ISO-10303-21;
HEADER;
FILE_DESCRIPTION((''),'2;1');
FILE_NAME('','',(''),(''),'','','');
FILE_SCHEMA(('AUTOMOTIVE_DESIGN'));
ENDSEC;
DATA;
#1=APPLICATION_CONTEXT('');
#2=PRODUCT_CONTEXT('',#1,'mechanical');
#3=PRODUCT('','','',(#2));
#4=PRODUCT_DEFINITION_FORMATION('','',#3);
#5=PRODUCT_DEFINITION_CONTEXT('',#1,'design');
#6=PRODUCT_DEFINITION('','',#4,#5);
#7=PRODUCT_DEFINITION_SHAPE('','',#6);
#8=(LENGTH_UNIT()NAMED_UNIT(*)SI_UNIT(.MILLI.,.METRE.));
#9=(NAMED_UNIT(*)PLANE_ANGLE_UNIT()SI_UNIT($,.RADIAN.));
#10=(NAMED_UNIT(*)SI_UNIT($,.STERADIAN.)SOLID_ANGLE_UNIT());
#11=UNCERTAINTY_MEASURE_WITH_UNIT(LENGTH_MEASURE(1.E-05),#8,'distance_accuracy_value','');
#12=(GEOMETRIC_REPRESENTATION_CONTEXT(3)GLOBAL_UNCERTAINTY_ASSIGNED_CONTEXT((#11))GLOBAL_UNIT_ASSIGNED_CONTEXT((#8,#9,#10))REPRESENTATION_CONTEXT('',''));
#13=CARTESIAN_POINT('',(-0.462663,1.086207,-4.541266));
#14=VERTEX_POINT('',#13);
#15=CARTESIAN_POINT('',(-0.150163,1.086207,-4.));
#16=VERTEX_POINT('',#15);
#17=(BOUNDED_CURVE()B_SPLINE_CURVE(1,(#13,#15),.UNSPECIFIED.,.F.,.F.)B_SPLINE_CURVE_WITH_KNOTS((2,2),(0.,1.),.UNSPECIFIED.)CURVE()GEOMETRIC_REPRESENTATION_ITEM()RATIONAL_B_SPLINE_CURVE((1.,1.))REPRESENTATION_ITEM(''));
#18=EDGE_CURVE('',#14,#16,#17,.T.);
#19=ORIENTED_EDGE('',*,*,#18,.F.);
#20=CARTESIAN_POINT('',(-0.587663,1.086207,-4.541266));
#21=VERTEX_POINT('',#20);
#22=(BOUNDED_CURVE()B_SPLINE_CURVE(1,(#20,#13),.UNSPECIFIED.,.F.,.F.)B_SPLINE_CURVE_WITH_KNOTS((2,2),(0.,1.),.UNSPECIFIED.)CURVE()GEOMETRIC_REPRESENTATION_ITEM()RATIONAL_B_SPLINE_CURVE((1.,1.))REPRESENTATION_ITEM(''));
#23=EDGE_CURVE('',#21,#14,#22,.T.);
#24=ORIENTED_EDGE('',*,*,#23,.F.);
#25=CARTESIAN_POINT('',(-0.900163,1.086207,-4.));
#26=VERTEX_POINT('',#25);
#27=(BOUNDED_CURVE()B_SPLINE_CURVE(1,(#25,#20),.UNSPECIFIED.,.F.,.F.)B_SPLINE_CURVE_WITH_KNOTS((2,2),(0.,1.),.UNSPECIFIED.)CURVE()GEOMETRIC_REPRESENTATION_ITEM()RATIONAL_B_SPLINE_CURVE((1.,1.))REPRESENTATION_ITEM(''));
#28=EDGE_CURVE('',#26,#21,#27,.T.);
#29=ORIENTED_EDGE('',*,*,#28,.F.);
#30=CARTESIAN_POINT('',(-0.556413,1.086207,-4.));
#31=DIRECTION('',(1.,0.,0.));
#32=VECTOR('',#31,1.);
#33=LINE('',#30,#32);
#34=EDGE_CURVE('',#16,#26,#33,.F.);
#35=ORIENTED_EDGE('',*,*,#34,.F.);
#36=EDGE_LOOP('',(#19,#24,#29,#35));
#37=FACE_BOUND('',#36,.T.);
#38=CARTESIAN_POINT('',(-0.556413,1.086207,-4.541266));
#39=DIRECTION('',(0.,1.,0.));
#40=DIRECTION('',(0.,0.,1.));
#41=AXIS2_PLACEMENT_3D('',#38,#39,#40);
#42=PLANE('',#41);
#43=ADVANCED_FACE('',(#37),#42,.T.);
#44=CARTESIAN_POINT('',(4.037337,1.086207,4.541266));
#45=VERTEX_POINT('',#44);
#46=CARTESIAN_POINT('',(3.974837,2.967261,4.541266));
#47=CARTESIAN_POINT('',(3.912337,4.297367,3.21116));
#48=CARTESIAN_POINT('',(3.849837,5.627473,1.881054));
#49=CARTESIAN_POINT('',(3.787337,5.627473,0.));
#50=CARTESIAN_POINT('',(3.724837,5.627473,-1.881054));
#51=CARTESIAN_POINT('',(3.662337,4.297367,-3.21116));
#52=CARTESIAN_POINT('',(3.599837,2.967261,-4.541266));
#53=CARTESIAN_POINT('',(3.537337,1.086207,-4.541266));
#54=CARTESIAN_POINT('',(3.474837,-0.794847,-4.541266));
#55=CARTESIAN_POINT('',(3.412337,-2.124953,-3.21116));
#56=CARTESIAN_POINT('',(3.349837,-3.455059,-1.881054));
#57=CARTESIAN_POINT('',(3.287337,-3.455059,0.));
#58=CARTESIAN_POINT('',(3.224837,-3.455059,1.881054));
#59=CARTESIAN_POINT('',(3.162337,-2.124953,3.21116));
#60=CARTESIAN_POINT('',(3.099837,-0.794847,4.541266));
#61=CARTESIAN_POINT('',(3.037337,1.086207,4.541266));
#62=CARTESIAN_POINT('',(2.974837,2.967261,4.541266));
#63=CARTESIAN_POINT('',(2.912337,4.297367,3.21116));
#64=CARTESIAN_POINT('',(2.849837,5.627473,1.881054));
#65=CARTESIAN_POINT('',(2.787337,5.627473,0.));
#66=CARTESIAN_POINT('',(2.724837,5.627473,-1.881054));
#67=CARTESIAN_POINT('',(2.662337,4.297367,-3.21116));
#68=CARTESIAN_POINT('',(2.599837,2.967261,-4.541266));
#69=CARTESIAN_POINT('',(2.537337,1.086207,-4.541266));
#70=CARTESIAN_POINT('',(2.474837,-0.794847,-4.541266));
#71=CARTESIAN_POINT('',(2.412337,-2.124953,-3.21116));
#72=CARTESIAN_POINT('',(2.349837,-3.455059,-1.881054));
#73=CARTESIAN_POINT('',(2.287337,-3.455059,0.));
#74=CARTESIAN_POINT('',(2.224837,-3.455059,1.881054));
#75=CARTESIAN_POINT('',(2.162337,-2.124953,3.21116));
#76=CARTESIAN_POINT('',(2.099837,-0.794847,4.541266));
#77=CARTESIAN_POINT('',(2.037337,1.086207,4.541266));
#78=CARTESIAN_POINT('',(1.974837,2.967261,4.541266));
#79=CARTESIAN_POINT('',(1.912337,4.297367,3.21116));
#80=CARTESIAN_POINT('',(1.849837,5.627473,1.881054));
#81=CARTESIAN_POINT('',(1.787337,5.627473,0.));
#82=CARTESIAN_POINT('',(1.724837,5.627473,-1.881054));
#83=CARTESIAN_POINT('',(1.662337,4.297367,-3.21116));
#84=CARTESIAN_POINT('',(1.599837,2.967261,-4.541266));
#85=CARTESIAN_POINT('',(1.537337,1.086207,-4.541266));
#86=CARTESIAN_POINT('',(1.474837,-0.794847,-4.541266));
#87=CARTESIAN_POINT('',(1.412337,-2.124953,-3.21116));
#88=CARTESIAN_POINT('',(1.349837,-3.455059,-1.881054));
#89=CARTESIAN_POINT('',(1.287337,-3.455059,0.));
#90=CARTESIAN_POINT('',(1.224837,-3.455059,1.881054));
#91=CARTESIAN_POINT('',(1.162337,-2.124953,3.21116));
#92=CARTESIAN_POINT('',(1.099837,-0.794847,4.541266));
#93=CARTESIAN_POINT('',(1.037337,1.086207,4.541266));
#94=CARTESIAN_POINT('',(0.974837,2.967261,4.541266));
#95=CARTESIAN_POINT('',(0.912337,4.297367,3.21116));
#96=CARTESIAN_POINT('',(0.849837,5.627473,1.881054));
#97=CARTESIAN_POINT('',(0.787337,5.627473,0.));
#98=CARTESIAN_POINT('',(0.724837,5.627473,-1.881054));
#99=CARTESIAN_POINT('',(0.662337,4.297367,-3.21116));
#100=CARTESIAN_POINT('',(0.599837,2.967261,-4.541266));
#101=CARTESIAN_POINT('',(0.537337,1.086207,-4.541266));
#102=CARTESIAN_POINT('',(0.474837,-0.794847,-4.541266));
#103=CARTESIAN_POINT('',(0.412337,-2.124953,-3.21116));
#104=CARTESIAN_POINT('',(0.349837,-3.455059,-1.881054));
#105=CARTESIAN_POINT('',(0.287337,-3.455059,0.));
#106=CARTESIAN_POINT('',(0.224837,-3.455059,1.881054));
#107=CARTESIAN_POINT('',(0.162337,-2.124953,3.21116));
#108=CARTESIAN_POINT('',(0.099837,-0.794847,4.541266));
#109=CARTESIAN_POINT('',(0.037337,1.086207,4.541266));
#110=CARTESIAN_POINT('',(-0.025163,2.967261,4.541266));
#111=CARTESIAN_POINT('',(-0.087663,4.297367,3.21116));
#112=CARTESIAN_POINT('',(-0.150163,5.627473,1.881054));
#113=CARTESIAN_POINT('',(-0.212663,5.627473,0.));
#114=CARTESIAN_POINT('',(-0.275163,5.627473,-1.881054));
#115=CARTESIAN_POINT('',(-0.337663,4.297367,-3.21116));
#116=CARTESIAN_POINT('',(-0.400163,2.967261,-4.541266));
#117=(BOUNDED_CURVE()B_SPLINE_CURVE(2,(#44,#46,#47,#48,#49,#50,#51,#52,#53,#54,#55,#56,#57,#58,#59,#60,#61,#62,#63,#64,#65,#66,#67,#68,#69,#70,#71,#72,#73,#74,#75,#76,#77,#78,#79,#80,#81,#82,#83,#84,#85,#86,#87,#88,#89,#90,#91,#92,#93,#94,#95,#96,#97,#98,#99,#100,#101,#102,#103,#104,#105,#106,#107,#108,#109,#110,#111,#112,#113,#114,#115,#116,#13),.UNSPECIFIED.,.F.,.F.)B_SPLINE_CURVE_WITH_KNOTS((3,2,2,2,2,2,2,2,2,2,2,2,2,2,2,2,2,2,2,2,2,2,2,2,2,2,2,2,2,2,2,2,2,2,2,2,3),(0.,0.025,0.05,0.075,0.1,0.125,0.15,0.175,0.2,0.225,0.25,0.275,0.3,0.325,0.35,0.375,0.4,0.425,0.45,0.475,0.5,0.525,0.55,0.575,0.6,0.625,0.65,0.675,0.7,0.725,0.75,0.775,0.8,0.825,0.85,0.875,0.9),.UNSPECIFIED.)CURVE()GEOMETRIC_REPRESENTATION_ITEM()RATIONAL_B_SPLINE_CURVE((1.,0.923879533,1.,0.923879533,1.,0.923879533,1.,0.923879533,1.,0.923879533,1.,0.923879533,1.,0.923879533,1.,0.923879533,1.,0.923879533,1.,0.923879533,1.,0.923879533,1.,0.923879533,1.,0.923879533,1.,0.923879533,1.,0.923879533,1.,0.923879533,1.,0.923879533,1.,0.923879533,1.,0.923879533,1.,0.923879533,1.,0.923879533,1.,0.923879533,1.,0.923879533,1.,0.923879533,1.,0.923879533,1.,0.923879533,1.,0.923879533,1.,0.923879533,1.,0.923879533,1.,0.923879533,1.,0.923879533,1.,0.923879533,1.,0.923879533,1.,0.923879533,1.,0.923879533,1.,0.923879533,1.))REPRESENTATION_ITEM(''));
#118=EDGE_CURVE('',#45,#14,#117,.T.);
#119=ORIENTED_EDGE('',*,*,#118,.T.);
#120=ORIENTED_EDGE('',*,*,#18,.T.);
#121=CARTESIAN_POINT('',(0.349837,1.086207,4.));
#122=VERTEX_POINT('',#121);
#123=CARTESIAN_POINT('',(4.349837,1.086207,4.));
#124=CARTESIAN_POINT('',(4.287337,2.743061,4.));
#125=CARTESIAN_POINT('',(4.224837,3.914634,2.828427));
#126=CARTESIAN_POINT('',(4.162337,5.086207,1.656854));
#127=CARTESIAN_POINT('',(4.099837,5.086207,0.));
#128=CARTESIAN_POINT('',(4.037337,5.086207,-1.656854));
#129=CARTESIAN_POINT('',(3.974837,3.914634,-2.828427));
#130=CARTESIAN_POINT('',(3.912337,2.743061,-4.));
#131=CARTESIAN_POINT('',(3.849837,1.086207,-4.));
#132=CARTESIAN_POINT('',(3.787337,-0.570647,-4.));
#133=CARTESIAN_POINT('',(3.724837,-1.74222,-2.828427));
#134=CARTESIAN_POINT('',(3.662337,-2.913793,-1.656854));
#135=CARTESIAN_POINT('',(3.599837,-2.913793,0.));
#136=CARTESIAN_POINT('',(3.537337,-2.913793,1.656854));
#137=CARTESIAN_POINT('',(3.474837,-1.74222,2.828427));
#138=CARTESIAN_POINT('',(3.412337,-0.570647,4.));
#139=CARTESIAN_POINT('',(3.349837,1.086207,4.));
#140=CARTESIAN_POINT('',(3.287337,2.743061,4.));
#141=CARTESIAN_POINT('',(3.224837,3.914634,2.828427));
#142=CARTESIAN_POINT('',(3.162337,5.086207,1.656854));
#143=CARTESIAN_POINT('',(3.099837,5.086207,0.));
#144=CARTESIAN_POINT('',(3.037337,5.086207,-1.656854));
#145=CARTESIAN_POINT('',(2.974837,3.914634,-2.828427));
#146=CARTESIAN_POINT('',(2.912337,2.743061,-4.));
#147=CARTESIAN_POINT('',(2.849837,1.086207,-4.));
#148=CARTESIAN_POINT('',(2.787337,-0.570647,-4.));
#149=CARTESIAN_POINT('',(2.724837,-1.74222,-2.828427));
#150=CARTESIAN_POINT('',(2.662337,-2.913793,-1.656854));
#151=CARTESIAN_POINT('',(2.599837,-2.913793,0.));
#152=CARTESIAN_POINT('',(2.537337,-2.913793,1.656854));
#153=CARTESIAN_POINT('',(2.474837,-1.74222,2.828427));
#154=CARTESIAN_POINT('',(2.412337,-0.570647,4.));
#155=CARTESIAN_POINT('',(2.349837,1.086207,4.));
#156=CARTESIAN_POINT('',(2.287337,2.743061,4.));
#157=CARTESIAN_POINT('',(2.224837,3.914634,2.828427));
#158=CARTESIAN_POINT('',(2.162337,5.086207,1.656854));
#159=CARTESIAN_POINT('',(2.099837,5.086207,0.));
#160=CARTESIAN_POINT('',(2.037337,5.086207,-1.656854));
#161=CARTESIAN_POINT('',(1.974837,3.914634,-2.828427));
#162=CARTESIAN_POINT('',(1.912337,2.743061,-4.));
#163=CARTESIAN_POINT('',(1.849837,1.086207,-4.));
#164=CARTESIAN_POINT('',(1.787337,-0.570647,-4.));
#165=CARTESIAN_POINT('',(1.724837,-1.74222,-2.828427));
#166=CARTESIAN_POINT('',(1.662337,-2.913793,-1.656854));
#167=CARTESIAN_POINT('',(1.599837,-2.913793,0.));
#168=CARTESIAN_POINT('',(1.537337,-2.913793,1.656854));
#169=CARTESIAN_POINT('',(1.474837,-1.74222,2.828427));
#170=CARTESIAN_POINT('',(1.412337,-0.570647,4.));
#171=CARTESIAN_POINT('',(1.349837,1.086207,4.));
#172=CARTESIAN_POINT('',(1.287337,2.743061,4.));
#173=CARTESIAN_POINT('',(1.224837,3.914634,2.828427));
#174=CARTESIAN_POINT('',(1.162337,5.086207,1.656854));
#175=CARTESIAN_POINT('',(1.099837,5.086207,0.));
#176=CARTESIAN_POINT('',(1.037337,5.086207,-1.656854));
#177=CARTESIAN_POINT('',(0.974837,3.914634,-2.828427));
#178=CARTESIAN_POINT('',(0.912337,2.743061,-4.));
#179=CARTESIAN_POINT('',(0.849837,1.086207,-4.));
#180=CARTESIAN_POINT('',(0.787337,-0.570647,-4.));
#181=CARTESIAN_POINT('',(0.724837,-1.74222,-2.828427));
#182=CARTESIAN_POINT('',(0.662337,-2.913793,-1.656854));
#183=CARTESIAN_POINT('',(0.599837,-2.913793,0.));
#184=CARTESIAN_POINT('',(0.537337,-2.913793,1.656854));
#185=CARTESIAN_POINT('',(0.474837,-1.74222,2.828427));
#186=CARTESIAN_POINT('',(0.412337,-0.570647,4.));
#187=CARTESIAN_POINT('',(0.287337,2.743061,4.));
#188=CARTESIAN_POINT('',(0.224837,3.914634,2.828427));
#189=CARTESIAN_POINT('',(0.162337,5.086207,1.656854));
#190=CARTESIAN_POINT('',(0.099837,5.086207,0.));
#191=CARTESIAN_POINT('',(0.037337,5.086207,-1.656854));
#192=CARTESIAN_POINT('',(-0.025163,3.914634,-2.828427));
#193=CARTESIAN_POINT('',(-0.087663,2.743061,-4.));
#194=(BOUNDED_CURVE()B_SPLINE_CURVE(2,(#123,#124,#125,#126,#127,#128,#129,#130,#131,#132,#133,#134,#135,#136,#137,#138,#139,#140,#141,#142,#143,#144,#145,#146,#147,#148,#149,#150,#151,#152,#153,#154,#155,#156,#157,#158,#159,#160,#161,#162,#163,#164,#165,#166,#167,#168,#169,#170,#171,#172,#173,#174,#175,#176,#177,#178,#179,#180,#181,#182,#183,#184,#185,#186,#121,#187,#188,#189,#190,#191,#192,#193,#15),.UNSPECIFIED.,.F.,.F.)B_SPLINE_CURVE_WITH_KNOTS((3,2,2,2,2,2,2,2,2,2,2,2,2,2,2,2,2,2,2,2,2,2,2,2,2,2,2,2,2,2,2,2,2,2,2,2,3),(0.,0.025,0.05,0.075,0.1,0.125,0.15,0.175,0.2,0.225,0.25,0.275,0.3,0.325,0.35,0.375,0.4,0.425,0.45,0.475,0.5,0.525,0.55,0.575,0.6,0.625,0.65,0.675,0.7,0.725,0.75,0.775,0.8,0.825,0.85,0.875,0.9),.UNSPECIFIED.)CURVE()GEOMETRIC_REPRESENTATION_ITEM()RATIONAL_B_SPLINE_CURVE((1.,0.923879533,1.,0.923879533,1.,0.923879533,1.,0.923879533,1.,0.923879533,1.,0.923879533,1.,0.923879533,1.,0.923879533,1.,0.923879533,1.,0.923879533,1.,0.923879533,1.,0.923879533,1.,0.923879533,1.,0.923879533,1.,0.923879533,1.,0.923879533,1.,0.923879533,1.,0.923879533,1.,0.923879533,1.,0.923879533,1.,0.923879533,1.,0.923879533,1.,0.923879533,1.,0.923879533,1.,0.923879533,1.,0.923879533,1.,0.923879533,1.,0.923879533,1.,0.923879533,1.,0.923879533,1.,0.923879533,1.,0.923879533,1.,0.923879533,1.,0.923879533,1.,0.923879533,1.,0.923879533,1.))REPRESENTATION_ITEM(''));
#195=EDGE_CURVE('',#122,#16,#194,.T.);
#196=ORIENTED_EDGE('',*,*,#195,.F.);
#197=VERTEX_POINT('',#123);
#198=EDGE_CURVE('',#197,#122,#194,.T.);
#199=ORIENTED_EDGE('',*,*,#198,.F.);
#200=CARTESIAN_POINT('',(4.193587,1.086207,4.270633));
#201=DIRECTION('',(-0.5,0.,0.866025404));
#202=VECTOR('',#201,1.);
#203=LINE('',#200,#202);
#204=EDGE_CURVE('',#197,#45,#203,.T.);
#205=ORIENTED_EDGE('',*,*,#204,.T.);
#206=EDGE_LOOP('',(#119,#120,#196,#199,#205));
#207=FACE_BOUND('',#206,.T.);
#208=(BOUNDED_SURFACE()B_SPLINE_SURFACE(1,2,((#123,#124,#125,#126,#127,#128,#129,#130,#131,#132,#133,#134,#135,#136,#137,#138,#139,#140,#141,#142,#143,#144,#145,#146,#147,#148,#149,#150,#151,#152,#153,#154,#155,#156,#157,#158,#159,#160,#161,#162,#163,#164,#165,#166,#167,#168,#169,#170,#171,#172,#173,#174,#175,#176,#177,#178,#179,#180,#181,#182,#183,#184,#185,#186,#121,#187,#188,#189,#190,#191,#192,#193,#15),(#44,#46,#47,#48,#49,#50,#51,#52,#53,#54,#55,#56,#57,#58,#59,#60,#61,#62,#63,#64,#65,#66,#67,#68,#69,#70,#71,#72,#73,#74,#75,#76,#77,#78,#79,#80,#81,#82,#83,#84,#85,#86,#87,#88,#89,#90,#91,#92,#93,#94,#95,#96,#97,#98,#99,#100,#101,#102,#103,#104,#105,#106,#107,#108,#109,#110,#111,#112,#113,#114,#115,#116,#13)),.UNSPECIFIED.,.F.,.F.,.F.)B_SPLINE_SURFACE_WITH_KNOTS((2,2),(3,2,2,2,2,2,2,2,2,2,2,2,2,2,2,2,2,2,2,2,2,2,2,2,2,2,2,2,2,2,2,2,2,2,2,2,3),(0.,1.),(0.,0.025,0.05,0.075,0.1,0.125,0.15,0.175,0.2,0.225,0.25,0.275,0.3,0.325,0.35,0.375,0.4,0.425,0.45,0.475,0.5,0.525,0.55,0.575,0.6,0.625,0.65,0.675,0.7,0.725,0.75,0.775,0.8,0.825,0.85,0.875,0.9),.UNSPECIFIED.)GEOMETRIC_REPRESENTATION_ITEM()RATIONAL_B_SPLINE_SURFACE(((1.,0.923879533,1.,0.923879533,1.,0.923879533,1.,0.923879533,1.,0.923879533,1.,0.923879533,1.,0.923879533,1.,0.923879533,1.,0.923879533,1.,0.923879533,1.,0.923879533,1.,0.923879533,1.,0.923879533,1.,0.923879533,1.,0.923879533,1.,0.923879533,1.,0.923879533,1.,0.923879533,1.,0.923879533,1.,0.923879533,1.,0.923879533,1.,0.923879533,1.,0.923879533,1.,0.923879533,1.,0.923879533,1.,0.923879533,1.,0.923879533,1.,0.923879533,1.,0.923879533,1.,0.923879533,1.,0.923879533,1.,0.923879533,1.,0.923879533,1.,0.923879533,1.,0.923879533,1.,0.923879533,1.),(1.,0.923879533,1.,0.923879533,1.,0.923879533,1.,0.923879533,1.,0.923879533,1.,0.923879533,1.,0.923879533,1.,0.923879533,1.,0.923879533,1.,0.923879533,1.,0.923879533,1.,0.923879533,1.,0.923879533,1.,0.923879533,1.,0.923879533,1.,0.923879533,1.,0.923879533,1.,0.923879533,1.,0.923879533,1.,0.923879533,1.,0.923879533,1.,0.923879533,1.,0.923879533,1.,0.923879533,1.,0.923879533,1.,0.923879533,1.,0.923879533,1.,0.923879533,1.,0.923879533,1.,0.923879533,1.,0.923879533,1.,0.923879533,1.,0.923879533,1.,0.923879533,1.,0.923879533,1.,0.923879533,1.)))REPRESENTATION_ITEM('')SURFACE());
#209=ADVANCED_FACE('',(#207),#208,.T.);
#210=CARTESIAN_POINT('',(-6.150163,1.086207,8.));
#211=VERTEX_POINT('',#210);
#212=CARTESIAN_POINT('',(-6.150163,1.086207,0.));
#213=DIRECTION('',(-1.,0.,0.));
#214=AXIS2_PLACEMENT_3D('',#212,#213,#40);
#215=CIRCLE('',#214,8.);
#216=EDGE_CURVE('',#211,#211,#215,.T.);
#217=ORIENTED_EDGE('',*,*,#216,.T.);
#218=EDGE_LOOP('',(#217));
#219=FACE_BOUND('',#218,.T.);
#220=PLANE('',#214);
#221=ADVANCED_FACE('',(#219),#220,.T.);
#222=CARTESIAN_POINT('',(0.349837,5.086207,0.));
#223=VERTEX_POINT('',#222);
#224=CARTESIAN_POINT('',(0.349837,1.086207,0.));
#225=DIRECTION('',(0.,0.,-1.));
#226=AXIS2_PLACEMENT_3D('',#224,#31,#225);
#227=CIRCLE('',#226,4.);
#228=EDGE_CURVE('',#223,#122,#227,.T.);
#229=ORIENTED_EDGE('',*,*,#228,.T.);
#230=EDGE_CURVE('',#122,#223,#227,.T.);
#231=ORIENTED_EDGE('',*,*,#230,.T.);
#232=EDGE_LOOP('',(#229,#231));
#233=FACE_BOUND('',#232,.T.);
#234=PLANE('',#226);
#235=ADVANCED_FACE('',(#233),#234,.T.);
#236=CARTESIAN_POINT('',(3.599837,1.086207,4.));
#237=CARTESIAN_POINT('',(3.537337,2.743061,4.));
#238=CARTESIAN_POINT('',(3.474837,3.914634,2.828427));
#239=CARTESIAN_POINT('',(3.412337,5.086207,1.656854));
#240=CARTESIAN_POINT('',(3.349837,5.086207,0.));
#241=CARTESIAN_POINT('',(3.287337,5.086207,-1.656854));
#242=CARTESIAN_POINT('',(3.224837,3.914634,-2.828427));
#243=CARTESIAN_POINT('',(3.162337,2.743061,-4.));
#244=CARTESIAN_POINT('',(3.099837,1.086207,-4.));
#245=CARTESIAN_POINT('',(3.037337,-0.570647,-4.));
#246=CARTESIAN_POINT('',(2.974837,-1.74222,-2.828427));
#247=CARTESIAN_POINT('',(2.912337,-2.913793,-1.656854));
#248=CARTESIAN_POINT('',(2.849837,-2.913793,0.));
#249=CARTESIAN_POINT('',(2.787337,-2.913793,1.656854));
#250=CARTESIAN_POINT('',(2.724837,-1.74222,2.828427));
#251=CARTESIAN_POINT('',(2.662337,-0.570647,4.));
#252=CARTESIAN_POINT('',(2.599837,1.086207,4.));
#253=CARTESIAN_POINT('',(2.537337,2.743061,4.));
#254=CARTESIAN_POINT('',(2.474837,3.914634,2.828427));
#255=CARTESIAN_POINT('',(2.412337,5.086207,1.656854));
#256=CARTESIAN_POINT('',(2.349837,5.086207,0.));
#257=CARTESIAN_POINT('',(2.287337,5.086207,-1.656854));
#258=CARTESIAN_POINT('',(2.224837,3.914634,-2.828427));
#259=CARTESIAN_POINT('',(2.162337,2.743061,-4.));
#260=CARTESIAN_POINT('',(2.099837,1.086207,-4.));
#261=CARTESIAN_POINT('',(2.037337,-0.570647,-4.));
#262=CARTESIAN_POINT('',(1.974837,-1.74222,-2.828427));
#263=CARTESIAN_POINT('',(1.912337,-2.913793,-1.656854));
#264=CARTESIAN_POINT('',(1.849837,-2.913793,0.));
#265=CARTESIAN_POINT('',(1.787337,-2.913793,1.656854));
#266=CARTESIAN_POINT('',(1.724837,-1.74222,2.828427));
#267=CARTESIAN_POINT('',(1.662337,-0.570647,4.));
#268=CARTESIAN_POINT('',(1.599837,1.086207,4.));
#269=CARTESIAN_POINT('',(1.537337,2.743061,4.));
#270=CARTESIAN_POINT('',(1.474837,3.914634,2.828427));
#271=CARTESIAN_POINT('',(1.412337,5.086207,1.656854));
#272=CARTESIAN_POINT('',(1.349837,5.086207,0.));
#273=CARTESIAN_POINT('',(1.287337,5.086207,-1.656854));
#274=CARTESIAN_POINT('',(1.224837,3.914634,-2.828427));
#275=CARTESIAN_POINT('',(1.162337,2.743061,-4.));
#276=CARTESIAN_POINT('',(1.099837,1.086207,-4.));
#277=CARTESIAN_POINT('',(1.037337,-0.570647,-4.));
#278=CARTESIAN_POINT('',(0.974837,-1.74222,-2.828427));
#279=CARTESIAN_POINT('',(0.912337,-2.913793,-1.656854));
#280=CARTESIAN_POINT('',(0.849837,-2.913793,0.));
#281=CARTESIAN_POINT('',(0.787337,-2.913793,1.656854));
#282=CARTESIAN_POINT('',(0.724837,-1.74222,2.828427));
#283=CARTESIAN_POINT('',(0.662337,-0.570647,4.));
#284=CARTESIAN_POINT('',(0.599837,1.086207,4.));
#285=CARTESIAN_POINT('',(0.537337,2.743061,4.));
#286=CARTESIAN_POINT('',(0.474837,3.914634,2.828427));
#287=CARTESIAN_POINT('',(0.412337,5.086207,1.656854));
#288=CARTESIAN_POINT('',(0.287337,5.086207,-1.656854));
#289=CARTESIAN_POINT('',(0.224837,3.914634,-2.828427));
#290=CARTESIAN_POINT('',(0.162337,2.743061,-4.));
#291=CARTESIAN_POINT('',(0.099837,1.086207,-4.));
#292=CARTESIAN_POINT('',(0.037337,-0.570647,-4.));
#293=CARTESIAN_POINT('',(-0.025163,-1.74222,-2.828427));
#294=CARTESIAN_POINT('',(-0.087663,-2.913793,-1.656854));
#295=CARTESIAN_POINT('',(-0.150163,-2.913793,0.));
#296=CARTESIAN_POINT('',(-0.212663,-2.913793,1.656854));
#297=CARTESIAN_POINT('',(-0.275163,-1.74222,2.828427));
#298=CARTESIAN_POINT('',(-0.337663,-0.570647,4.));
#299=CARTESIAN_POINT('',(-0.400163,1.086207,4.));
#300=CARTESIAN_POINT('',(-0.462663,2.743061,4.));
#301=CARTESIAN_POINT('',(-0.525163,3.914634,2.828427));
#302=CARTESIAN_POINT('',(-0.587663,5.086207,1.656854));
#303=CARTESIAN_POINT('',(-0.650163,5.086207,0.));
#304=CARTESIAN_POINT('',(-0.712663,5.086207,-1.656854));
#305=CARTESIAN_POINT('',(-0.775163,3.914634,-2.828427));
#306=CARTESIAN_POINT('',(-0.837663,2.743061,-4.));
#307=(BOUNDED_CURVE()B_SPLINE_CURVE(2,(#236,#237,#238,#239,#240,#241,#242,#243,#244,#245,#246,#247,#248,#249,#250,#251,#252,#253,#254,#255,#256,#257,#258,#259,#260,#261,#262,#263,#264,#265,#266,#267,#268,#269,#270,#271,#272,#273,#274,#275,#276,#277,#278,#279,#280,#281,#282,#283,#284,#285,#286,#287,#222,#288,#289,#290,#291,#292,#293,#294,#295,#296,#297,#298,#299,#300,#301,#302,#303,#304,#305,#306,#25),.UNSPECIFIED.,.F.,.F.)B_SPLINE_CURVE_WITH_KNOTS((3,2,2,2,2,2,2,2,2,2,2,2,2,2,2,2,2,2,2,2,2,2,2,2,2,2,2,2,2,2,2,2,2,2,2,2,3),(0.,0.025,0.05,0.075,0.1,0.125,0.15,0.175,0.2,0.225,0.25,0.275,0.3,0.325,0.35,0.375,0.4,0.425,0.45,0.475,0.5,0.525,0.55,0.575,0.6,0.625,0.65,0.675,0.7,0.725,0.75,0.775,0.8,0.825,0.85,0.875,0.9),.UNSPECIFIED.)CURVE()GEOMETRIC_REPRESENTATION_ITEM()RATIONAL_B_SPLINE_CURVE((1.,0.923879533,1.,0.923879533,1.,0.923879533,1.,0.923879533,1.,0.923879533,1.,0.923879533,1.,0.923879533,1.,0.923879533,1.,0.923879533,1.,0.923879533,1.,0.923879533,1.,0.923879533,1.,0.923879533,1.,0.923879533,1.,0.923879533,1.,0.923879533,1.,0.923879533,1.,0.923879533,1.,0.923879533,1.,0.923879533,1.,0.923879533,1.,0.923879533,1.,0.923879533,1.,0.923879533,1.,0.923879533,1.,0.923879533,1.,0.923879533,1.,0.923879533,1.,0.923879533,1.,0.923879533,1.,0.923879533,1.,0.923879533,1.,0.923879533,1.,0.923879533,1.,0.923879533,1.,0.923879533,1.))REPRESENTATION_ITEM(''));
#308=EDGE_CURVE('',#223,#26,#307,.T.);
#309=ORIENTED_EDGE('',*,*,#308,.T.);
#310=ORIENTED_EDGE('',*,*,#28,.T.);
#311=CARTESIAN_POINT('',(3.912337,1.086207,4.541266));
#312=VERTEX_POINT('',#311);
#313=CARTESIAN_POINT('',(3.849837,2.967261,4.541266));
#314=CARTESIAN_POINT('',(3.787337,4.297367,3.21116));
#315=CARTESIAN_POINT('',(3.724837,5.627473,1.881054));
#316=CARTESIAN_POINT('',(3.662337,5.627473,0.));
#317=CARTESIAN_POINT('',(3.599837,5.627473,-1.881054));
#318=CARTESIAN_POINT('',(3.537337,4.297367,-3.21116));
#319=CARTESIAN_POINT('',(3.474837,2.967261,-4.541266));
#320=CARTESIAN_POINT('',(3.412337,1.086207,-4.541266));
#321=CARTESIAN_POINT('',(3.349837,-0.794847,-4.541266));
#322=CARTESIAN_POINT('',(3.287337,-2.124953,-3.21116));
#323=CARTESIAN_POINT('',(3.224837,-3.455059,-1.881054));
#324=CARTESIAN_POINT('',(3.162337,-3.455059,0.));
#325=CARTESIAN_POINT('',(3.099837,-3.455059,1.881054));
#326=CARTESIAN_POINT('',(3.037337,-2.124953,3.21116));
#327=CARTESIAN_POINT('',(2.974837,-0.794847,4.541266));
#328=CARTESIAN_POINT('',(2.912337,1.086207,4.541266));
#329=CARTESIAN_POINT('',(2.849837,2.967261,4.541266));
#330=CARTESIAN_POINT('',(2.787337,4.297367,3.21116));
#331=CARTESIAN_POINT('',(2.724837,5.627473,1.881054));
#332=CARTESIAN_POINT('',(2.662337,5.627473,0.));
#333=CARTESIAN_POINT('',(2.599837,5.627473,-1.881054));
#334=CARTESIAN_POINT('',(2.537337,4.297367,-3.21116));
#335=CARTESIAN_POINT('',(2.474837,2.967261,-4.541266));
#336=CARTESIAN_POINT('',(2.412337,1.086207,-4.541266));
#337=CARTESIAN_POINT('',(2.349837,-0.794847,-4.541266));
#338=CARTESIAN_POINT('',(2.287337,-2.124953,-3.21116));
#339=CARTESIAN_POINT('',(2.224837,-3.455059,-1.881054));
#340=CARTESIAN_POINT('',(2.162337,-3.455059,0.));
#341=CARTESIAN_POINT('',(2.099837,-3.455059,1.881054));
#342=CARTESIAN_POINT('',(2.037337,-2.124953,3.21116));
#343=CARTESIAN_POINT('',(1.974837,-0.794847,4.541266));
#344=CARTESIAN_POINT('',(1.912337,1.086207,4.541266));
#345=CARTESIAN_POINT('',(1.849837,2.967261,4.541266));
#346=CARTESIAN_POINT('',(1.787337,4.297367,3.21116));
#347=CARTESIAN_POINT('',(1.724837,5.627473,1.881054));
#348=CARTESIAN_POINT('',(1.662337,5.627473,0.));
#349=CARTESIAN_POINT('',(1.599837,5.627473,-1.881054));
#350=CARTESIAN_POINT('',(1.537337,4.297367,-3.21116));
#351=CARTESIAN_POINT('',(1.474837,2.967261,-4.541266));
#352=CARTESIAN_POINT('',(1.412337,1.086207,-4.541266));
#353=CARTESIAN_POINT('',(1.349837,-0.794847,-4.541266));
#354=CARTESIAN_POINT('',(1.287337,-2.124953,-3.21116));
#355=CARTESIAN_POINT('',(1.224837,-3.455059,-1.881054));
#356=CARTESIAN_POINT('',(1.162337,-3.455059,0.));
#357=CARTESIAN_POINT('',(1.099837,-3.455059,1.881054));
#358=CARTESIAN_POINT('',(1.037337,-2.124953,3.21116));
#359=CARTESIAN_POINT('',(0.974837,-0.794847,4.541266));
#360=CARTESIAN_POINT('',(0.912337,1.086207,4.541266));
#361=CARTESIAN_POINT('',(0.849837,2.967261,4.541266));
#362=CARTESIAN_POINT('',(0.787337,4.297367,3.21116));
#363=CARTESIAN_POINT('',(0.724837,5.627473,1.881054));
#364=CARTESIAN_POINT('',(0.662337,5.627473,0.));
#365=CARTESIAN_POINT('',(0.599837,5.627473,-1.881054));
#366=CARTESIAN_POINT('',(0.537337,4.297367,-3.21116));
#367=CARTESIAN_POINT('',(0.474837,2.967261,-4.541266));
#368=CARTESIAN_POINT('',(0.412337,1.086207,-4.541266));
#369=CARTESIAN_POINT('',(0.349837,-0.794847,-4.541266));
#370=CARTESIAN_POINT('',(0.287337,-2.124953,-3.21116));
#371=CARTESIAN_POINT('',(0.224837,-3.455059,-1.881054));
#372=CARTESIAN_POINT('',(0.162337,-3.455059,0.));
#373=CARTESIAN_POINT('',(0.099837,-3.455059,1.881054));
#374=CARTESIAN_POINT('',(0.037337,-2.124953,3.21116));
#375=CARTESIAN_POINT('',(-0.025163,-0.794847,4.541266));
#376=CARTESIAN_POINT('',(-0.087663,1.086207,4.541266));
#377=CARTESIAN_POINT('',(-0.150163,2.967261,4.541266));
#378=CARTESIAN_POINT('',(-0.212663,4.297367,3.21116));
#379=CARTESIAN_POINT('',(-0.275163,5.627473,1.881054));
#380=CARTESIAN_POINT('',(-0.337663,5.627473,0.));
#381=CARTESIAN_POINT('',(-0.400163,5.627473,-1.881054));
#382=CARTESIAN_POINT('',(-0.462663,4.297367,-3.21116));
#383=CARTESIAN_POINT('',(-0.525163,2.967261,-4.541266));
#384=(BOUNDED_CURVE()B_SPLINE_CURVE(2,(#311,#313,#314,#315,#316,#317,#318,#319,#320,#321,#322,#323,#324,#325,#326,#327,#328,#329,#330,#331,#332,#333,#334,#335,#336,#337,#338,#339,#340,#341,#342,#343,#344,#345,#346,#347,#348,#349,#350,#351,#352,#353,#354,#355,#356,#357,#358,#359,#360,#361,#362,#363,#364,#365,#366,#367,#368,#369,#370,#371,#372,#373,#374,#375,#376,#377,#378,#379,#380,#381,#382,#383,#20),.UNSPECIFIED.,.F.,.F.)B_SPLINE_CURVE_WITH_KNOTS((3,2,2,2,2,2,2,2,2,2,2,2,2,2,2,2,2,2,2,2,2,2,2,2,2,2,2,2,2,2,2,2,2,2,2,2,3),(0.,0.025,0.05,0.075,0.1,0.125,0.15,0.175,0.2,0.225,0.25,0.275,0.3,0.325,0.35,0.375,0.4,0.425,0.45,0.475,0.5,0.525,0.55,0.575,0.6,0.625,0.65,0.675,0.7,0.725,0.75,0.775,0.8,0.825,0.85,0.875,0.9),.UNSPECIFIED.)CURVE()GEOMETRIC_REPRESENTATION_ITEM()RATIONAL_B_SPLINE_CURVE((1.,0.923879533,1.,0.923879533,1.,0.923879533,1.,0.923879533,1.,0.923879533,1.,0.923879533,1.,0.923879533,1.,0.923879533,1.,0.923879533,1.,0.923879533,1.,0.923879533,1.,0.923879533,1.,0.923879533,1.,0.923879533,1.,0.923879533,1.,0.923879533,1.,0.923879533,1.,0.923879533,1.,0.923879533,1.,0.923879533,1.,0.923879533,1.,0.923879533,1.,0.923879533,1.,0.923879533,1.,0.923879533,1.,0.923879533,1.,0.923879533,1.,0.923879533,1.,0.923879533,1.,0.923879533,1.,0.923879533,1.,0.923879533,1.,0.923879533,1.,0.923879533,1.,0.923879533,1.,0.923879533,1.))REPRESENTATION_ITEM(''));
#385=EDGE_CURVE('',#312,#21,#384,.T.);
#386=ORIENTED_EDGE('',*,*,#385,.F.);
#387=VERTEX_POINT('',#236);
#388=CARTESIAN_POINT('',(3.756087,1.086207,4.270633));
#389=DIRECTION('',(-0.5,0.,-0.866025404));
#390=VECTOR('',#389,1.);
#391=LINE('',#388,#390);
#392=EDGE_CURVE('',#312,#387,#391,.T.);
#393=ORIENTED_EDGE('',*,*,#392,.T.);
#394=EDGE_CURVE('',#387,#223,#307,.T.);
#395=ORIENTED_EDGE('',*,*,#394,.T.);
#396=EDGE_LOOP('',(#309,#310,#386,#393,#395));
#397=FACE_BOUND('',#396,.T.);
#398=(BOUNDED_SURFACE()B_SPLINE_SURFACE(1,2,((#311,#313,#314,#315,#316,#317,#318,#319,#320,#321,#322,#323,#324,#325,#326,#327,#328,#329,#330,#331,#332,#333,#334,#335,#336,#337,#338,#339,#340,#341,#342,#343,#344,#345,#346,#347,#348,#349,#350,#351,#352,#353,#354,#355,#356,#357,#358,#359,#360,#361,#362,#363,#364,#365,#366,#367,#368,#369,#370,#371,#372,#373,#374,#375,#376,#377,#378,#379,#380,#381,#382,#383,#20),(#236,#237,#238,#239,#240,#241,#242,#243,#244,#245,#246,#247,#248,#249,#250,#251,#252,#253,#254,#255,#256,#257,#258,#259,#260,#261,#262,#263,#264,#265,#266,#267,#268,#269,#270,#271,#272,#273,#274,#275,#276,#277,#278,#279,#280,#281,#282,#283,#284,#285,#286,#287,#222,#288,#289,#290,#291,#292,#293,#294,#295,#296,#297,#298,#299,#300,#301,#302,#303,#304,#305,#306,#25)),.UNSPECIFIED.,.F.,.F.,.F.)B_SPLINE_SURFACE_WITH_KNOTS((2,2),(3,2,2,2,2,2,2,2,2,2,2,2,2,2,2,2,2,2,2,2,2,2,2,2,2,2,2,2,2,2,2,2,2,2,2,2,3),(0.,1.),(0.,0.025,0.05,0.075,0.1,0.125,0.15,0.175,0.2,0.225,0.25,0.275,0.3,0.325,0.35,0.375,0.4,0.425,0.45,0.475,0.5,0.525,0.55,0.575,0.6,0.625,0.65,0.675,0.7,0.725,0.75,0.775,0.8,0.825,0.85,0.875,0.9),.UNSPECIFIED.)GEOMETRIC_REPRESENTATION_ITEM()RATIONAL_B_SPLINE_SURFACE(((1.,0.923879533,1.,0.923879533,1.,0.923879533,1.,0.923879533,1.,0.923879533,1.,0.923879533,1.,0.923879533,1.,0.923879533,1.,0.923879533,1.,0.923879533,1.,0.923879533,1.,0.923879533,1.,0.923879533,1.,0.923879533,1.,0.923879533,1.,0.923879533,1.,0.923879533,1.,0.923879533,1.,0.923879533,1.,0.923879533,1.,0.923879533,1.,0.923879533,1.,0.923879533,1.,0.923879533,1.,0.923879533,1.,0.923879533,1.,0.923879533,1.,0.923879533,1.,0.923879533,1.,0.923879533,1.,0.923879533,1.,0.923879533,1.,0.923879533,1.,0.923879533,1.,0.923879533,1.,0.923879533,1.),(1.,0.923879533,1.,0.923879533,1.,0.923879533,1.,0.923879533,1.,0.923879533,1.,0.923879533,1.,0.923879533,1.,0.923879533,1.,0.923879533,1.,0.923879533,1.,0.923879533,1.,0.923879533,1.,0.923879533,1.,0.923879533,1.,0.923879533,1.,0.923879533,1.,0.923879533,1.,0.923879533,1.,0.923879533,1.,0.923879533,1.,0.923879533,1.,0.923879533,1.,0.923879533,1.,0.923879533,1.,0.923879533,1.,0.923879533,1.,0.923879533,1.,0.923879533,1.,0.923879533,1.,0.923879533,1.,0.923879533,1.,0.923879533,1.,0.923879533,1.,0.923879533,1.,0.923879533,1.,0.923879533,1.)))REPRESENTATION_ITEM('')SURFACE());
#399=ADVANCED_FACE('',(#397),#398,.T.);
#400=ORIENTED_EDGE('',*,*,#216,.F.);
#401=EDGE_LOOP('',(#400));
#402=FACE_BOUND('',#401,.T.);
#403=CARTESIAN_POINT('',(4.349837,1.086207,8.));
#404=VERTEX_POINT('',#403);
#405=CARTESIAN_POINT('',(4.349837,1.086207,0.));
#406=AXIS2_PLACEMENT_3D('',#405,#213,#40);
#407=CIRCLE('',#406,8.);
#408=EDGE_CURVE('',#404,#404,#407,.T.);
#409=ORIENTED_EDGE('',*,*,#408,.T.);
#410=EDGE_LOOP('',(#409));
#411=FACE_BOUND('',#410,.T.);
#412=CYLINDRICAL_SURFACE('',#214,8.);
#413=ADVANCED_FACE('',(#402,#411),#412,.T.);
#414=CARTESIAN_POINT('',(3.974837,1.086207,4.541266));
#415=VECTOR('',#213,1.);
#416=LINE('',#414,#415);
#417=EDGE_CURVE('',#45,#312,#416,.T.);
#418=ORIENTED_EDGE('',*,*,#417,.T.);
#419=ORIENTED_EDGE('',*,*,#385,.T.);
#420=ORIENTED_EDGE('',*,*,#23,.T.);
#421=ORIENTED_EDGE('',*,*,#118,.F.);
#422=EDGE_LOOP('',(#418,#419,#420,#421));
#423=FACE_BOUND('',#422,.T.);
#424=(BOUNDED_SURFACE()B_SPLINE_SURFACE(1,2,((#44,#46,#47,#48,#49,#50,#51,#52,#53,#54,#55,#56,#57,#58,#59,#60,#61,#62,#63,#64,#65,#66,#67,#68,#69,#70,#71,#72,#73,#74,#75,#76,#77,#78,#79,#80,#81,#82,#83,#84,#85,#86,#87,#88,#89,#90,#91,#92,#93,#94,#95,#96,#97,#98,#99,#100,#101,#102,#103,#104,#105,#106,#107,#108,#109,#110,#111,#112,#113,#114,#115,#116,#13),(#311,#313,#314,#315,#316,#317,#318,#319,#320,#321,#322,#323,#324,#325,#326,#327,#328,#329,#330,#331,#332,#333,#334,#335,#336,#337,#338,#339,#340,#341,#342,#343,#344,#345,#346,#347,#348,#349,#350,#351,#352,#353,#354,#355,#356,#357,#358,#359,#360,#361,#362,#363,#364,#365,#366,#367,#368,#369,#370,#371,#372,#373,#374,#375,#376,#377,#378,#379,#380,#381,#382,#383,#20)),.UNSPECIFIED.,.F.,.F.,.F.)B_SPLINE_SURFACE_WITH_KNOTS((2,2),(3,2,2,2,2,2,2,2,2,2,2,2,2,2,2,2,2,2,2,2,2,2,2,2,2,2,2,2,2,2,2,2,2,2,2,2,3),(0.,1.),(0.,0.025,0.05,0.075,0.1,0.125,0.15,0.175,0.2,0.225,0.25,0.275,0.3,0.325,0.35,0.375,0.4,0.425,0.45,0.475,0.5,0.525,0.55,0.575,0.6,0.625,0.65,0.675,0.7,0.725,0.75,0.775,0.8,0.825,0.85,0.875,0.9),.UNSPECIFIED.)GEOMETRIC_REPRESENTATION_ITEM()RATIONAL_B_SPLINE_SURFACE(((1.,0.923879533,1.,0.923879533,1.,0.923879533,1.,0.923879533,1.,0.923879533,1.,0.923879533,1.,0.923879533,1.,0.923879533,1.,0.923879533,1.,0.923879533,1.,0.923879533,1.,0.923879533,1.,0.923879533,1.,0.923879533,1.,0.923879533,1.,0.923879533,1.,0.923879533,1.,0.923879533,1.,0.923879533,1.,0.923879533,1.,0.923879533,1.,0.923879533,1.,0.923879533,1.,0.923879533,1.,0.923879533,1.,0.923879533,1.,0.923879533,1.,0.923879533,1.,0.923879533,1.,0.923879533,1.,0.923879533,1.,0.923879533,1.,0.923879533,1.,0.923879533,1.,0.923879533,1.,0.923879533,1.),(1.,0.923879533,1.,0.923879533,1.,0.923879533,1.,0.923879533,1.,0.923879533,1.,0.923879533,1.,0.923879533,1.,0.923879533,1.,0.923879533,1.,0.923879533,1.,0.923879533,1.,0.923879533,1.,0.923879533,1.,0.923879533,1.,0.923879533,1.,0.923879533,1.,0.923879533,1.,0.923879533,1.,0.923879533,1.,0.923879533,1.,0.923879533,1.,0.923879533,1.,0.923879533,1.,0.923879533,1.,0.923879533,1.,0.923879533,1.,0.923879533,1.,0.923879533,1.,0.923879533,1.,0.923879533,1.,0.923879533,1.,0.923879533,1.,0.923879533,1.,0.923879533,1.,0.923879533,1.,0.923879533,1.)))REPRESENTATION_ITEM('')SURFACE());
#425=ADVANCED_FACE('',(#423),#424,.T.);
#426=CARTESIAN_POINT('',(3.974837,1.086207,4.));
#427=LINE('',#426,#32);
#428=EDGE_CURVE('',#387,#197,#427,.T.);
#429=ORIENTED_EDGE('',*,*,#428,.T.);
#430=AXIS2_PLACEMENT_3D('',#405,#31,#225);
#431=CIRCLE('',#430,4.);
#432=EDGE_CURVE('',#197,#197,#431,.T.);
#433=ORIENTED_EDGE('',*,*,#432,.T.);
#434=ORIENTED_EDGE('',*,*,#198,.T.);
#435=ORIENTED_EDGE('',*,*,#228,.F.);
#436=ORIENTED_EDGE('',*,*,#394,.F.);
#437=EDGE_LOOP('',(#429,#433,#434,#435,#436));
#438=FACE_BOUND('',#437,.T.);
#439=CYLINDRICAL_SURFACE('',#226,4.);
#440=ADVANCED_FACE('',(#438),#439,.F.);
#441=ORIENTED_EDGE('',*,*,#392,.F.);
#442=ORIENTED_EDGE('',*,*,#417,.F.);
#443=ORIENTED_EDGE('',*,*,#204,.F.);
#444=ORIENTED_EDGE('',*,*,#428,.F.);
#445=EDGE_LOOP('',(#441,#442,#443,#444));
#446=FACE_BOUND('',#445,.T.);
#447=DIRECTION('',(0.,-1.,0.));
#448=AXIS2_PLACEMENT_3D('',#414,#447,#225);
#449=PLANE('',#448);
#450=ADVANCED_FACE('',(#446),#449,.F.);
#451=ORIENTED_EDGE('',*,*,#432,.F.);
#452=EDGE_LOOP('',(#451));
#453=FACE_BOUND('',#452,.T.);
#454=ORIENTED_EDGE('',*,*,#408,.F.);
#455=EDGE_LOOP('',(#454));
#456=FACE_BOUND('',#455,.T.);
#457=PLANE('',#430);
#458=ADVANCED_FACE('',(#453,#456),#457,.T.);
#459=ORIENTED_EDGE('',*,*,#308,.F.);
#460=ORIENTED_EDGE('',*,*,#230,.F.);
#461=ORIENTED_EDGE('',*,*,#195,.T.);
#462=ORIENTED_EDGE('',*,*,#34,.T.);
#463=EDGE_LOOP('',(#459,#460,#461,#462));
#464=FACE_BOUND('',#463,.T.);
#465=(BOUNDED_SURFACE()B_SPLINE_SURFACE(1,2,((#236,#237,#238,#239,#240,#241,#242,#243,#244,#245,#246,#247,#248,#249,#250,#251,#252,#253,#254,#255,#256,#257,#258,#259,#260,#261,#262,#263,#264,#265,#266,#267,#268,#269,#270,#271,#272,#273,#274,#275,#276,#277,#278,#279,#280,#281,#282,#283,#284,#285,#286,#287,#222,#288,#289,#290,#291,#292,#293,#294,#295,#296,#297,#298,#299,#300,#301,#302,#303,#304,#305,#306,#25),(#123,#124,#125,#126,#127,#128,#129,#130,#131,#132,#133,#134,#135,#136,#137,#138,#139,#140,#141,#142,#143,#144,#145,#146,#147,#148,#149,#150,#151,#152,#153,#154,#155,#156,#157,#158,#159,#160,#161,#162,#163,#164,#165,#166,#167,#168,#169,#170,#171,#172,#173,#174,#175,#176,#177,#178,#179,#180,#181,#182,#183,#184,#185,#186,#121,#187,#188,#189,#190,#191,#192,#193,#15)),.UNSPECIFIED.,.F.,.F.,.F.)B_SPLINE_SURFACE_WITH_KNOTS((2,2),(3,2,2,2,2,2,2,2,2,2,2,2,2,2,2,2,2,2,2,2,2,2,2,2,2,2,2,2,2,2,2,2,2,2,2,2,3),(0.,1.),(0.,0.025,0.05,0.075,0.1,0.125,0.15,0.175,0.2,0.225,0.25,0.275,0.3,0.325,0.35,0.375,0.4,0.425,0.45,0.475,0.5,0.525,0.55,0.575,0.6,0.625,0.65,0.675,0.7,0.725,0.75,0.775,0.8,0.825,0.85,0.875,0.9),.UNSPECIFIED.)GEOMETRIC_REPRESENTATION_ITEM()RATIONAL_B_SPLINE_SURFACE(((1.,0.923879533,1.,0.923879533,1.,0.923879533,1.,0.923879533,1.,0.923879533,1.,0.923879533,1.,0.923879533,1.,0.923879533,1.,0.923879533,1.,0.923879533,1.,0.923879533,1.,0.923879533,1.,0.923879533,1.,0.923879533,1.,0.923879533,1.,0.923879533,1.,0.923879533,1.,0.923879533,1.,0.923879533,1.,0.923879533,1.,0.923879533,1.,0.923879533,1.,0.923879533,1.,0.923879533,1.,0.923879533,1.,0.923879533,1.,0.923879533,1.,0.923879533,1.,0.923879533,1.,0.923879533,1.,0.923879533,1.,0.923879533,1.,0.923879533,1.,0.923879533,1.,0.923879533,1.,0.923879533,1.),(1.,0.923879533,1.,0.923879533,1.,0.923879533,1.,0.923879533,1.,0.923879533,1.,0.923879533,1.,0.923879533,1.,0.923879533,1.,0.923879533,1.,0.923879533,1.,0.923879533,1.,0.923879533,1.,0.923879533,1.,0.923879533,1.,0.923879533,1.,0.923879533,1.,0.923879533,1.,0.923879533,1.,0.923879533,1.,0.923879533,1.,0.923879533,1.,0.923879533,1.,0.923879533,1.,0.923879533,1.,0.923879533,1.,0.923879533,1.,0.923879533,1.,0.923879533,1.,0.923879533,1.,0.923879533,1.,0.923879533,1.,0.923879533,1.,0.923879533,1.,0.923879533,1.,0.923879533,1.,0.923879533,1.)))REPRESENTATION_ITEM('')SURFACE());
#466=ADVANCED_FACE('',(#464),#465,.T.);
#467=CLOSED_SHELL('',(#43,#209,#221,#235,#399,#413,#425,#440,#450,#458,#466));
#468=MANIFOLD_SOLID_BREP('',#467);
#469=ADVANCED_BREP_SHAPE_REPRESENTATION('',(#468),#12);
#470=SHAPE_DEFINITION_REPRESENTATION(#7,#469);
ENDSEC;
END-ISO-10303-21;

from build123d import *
from build123d.topology import SkipClean

# Parameters (mm, degrees)
IZIM1_W               = 10.5
IZIM1_H               = 8
IZIM3_R               = 4
KES_EKSTR_ZYON1_DEPTH = 4
DI_1_PITCH            = 1


with BuildPart() as part:
    # Çizim1 → Döndür1 (revolve)
    with BuildSketch(Plane.XY, mode=Mode.PRIVATE) as d_nd_r1_sk:
        with Locations((-0.900163094, -2.913793103)):
            Rectangle(IZIM1_W, IZIM1_H)
    revolve(d_nd_r1_sk.sketch.rotate(Axis((-6.150163094, 1.086206897, 0), (1, 0, 0)), 270), axis=Axis((-6.150163094, 1.086206897, 0), (1, 0, 0)))

    # Çizim3 → Kes-Ekstrüzyon1 (cut)
    with BuildSketch(Plane(origin=(4.349836906, 0, 0), x_dir=(0, 0, -1), z_dir=(1, 0, 0))):
        with Locations((0, 1.086206897)):
            Circle(IZIM3_R)
    extrude(amount=-KES_EKSTR_ZYON1_DEPTH, mode=Mode.SUBTRACT)

    # Diş1: the profile of Diş Profili1 profile screwed along a right-hand helix of 4.5 turns, 8 arcs to a turn; built about Z, then put on its axis
    with SkipClean():  # the faces are left unmerged after this step: merging them gives an invalid solid
        di_1_z = Axis((0, 0, 0), (0, 0, 1))
        di_1_corners = [(3.9997, 0, -0.000173205), (4.541265875, 0, 0.312499999), (4.541265875, 0, 0.437499999), (3.9997, 0, 0.750173202)]
        with BuildLine(mode=Mode.PRIVATE) as di_1_profile:
            Line(di_1_corners[0], di_1_corners[1])
            Line(di_1_corners[1], di_1_corners[2])
            Line(di_1_corners[2], di_1_corners[3])
            Line(di_1_corners[3], di_1_corners[0])
        di_1_cap = Face(di_1_profile.wire())
        di_1_turn_angles = [0, 22.5, 45, 67.5, 90, 112.5, 135, 157.5, 180, 202.5, 225, 247.5, 270, 292.5, 315, 337.5, 360]
        di_1_turn_weights = [1, 0.9238795325112867, 1, 0.9238795325112867, 1, 0.9238795325112867, 1, 0.9238795325112867, 1, 0.9238795325112867, 1, 0.9238795325112867, 1, 0.9238795325112867, 1, 0.9238795325112867, 1]
        di_1_turn_rails = [Edge.make_bspline([Vector(p[0], p[1], 0).rotate(di_1_z, di_1_turn_angles[k]) / di_1_turn_weights[k] + Vector(0, 0, p[2] + DI_1_PITCH * di_1_turn_angles[k] / 360) for k in range(17)], [0, 0, 0, 1, 1, 2, 2, 3, 3, 4, 4, 5, 5, 6, 6, 7, 7, 8, 8, 8], 2, di_1_turn_weights) for p in di_1_corners]
        di_1_turn_sides = [Face.make_surface_from_curves(di_1_turn_rails[p[0]], di_1_turn_rails[p[1]]) for p in [(0, 1), (1, 2), (2, 3), (3, 0)]]
        di_1_last_angles = [1440, 1462.5, 1485, 1507.5, 1530, 1552.5, 1575, 1597.5, 1620]
        di_1_last_weights = [1, 0.9238795325112867, 1, 0.9238795325112867, 1, 0.9238795325112867, 1, 0.9238795325112867, 1]
        di_1_last_rails = [Edge.make_bspline([Vector(p[0], p[1], 0).rotate(di_1_z, di_1_last_angles[k]) / di_1_last_weights[k] + Vector(0, 0, p[2] + DI_1_PITCH * di_1_last_angles[k] / 360) for k in range(9)], [0, 0, 0, 1, 1, 2, 2, 3, 3, 4, 4, 4], 2, di_1_last_weights) for p in di_1_corners]
        di_1_last_sides = [Face.make_surface_from_curves(di_1_last_rails[p[0]], di_1_last_rails[p[1]]) for p in [(0, 1), (1, 2), (2, 3), (3, 0)]]
        di_1 = Plane(origin=(4.349836906, 1.086206897, 0), x_dir=(0, 0, 1), z_dir=(-1, 0, 0)) * Solid(Shell([*[p.moved(Location((0, 0, DI_1_PITCH * i))) for i in range(4) for p in di_1_turn_sides], *di_1_last_sides, di_1_cap, di_1_cap.rotate(di_1_z, 1620).moved(Location((0, 0, DI_1_PITCH * 1620 / 360)))]))
        add(di_1, mode=Mode.SUBTRACT)


solid = part.part
